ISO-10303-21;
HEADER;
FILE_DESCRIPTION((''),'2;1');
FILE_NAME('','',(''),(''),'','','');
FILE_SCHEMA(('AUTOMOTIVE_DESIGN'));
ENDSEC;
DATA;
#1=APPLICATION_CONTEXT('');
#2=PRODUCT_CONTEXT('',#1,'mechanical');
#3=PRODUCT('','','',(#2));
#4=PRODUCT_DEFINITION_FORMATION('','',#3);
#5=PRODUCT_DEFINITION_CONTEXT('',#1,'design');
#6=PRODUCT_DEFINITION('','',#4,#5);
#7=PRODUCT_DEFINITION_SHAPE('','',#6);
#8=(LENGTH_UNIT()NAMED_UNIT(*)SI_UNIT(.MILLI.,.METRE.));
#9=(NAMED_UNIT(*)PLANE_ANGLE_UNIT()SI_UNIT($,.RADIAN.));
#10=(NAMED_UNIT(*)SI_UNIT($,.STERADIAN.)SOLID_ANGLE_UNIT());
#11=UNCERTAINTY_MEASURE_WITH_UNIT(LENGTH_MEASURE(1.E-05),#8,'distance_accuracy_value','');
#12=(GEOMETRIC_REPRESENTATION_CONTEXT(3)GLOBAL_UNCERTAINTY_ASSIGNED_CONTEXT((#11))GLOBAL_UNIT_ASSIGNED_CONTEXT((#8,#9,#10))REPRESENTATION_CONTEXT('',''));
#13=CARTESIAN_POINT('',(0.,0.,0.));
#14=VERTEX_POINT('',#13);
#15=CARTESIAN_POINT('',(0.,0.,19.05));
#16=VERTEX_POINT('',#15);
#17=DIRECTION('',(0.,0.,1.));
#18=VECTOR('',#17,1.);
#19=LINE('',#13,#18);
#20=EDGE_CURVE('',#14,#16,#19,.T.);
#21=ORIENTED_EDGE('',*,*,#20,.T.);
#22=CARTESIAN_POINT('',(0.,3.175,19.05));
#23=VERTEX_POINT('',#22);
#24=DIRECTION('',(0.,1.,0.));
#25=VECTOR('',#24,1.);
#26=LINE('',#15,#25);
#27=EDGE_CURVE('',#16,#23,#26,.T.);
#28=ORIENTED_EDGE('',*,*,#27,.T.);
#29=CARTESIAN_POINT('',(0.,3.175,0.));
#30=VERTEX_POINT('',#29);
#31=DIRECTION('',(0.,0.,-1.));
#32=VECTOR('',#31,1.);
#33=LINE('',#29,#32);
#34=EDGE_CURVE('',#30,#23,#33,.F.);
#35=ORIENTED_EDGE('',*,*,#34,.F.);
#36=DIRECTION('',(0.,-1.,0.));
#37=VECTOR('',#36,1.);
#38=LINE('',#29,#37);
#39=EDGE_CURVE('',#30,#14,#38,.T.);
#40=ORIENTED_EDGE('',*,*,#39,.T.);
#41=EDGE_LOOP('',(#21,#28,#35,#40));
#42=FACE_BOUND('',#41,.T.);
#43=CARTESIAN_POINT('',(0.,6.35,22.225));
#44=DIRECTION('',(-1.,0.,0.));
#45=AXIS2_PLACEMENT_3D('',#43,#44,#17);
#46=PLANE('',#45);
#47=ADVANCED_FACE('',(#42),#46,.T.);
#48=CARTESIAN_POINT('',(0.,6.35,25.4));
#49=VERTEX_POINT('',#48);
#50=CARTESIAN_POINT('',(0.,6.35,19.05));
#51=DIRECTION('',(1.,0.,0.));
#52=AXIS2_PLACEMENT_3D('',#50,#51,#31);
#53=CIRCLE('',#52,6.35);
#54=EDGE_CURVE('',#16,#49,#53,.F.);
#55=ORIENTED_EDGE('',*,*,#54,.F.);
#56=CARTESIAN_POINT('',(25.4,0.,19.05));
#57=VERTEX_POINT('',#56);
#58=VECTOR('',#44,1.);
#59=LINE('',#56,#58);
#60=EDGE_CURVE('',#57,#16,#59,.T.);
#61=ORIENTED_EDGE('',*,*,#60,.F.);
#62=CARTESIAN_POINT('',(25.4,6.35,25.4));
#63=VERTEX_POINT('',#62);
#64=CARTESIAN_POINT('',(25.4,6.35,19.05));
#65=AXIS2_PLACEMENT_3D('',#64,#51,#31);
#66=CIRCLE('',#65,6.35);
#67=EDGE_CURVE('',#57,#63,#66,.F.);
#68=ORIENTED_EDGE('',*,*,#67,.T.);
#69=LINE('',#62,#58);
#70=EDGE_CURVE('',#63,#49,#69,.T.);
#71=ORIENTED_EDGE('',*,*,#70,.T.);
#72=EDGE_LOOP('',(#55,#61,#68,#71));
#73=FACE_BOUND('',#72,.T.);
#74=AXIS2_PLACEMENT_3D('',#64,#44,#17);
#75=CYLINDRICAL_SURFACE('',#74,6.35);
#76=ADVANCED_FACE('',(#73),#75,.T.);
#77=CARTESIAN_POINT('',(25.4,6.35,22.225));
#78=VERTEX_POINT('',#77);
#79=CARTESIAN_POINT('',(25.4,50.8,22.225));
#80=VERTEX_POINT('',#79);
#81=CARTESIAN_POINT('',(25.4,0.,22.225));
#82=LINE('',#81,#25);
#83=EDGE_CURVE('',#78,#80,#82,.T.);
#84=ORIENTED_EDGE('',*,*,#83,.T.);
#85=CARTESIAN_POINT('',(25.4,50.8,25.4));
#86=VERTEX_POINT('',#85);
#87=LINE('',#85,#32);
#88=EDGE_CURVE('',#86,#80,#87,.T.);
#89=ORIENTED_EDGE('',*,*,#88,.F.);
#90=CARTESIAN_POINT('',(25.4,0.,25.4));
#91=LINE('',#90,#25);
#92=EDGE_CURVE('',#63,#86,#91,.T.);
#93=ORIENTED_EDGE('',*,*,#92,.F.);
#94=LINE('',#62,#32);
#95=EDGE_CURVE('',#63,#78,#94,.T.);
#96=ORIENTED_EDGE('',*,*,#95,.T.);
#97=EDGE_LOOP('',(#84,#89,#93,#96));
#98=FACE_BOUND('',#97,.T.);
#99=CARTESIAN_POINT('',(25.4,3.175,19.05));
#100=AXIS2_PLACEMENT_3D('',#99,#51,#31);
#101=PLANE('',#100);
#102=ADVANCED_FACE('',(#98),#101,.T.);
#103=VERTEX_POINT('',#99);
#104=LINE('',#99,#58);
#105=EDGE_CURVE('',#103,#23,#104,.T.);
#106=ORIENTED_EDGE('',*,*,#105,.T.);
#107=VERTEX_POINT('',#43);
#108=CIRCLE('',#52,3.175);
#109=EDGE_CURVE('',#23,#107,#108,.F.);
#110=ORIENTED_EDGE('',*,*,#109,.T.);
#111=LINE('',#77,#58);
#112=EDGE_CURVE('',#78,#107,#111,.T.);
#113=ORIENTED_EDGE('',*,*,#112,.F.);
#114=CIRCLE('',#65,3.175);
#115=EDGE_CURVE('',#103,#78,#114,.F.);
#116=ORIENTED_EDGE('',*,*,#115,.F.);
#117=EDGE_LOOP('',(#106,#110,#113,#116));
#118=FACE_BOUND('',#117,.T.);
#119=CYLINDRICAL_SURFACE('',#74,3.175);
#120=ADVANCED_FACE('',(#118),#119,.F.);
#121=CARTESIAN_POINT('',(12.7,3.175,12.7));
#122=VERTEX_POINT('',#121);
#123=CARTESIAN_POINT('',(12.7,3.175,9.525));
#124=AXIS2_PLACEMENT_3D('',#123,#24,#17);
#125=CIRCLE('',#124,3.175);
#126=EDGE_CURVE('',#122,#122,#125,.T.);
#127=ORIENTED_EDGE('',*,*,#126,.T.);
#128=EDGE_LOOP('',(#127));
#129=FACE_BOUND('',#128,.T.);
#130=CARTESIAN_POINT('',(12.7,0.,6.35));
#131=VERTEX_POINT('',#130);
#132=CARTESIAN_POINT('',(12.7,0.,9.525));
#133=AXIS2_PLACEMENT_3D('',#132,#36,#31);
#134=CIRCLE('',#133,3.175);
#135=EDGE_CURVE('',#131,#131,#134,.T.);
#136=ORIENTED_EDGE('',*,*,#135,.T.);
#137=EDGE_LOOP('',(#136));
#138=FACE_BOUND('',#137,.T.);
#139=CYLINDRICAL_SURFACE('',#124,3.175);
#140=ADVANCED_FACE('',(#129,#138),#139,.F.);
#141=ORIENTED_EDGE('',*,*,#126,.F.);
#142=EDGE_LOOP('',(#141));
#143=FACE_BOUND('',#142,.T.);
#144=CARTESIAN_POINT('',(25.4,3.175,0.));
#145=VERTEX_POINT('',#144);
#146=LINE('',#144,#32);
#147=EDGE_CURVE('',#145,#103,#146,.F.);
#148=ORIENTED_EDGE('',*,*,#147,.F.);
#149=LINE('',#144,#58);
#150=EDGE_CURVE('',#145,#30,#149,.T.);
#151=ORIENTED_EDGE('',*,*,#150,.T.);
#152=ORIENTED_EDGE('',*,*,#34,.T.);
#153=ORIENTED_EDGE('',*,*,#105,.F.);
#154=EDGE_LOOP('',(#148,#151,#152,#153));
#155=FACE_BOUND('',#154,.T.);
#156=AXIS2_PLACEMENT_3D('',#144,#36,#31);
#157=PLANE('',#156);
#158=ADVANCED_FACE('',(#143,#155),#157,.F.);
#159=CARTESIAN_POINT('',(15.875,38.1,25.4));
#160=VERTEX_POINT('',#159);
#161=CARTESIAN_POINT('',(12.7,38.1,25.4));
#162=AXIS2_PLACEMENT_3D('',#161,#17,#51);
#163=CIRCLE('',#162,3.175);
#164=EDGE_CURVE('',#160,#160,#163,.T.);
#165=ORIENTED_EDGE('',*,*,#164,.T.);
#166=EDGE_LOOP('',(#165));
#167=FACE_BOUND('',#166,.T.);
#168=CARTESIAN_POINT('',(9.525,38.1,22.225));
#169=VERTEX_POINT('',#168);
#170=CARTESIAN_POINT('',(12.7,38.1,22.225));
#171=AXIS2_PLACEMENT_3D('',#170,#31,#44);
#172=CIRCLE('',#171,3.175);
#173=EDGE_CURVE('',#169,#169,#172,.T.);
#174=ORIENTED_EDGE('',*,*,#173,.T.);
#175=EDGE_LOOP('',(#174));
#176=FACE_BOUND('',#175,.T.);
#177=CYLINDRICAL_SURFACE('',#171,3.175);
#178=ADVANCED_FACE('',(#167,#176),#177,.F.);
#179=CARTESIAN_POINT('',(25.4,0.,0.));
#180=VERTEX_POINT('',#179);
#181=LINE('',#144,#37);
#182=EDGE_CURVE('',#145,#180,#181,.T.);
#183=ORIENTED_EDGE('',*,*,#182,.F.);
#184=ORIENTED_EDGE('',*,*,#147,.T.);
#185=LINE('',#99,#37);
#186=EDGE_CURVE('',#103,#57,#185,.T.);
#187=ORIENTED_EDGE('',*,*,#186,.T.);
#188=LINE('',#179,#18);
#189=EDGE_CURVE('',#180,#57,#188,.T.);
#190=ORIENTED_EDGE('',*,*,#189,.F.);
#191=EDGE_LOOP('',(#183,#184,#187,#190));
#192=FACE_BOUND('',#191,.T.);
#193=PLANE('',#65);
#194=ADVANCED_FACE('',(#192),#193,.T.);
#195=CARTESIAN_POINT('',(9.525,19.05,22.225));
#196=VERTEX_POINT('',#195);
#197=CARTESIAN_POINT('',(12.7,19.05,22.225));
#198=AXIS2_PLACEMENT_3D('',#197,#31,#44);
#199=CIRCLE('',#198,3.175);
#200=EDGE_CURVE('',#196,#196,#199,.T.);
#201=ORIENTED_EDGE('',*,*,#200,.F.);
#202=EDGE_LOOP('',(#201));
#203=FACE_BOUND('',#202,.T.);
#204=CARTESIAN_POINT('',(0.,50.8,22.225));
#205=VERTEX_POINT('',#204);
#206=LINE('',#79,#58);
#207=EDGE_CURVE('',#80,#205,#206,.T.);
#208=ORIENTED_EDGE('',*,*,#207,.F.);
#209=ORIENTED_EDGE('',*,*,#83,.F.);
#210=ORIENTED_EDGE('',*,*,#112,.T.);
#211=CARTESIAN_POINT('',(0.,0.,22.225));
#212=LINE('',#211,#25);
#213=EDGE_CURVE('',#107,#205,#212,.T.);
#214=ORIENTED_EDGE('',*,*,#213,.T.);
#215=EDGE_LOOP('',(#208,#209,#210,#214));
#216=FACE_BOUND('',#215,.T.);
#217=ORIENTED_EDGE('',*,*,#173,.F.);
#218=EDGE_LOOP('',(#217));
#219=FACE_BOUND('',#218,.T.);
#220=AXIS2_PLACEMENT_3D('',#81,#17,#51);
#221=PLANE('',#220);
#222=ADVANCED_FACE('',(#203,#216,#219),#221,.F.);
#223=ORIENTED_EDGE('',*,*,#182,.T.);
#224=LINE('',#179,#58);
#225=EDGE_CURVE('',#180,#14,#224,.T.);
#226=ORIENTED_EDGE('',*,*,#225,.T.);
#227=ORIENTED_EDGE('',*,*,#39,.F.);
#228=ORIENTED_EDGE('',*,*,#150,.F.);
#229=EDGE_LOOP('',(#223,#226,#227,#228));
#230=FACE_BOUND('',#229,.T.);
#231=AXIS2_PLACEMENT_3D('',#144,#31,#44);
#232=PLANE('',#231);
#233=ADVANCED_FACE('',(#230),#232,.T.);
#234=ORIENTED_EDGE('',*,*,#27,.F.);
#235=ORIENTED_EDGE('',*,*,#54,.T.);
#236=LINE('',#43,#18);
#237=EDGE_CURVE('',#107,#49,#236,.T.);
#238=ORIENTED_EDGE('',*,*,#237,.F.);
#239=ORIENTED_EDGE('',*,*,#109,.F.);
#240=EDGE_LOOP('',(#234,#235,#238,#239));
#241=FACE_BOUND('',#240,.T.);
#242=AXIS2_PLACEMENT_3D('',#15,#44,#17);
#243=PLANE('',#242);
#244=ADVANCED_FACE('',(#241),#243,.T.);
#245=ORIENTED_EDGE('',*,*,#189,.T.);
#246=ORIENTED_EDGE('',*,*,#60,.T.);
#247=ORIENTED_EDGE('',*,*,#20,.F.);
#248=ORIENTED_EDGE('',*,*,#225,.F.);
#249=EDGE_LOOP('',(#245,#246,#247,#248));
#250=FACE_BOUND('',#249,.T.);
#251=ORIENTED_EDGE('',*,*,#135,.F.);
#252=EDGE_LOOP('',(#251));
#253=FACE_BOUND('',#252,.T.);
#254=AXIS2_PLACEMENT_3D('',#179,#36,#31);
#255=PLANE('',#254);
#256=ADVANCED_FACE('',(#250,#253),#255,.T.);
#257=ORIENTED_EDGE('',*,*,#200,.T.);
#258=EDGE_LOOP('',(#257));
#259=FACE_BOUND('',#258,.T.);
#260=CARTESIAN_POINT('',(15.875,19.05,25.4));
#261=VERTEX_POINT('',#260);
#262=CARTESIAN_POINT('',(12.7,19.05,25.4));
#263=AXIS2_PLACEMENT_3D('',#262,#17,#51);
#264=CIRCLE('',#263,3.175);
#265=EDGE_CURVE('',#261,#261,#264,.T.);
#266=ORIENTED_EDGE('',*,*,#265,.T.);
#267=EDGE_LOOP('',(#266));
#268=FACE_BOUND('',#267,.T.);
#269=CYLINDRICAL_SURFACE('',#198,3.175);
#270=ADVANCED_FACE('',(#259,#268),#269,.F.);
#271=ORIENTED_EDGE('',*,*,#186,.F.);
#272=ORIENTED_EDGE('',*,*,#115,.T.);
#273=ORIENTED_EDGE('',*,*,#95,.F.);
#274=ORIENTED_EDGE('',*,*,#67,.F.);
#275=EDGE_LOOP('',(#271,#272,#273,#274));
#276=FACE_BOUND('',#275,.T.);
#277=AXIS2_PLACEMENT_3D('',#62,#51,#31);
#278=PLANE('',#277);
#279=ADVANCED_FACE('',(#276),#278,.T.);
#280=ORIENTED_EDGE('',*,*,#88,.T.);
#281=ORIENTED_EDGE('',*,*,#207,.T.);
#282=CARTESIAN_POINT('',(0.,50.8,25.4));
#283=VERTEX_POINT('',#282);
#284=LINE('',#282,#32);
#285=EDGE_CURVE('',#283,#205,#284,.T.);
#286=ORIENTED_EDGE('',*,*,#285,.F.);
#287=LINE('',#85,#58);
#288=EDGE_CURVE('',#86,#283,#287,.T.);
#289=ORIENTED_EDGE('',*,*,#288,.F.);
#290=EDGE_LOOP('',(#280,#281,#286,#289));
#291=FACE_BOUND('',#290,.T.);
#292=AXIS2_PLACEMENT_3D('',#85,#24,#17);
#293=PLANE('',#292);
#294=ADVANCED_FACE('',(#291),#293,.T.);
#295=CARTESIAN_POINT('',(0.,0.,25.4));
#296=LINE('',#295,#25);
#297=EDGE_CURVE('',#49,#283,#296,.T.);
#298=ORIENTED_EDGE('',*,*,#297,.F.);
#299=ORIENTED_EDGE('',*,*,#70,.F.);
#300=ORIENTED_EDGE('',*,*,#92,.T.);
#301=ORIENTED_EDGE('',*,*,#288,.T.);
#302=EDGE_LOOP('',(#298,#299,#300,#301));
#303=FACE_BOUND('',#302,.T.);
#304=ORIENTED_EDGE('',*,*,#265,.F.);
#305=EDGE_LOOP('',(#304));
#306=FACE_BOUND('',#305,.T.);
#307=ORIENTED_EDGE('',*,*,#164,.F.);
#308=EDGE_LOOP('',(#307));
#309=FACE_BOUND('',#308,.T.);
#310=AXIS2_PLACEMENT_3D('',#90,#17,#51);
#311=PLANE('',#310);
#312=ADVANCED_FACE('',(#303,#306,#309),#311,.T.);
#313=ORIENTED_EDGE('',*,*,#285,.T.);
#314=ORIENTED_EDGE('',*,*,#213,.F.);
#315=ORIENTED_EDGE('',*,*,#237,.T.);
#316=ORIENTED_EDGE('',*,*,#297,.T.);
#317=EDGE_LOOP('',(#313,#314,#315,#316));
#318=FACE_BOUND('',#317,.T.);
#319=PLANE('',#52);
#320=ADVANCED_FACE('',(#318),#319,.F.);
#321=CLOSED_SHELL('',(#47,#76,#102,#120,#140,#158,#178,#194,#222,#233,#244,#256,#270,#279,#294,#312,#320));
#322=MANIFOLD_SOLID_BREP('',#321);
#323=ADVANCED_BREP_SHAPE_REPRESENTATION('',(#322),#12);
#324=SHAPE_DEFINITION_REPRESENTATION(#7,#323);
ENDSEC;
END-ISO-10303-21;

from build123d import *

# Parameters (mm, degrees)
BASE_FLANGE1_DEPTH              = 25.4
F_1_4_0_25_DIAMETER_HOLE1_D     = 6.35
F_1_4_0_25_DIAMETER_HOLE1_DEPTH = 10.7188
F_1_4_0_25_DIAMETER_HOLE1_TIP   = 1.907732465
F_1_4_0_25_DIAMETER_HOLE2_D     = 6.35
F_1_4_0_25_DIAMETER_HOLE2_DEPTH = 10.7188
F_1_4_0_25_DIAMETER_HOLE2_TIP   = 1.907732465


# Sheet-metal steps are written as plain solids
with BuildPart() as part:
    # Sketch1 → Base-Flange1 (new body)
    with BuildSketch(Plane(origin=(0, 0, 0), x_dir=(0, 0, -1), z_dir=(1, 0, 0))):
        with BuildLine():
            Line((0, 0), (-19.05, 0))
            ThreePointArc((-19.05, 0), (-23.540128061, 1.859871939), (-25.4, 6.35))
            Line((-25.4, 6.35), (-25.4, 50.8))
            Line((-25.4, 50.8), (-22.225, 50.8))
            Line((-22.225, 50.8), (-22.225, 6.35))
            ThreePointArc((-22.225, 6.35), (-21.29506403, 4.10493597), (-19.05, 3.175))
            Line((-19.05, 3.175), (0, 3.175))
            Line((0, 3.175), (0, 0))
        make_face()
    extrude(amount=BASE_FLANGE1_DEPTH)

    # 1/4 (0.25) Diameter Hole1
    with Locations(Plane(origin=(0, 0, 22.225), x_dir=(-1, 0, 0), z_dir=(0, 0, -1))):
        with Locations((-12.7, 38.1), (-12.7, 19.05)):
            Hole(F_1_4_0_25_DIAMETER_HOLE1_D / 2, depth=F_1_4_0_25_DIAMETER_HOLE1_DEPTH)
            with Locations((0, 0, -(F_1_4_0_25_DIAMETER_HOLE1_DEPTH + F_1_4_0_25_DIAMETER_HOLE1_TIP / 2))):  # 118° drill point
                Cone(0, F_1_4_0_25_DIAMETER_HOLE1_D / 2, F_1_4_0_25_DIAMETER_HOLE1_TIP, mode=Mode.SUBTRACT)

    # 1/4 (0.25) Diameter Hole2
    with Locations(Plane(origin=(0, 3.175, 0), x_dir=(1, 0, 0), z_dir=(0, 1, 0))):
        with Locations((12.7, -9.525)):
            Hole(F_1_4_0_25_DIAMETER_HOLE2_D / 2, depth=F_1_4_0_25_DIAMETER_HOLE2_DEPTH)
            with Locations((0, 0, -(F_1_4_0_25_DIAMETER_HOLE2_DEPTH + F_1_4_0_25_DIAMETER_HOLE2_TIP / 2))):  # 118° drill point
                Cone(0, F_1_4_0_25_DIAMETER_HOLE2_D / 2, F_1_4_0_25_DIAMETER_HOLE2_TIP, mode=Mode.SUBTRACT)


solid = part.part
